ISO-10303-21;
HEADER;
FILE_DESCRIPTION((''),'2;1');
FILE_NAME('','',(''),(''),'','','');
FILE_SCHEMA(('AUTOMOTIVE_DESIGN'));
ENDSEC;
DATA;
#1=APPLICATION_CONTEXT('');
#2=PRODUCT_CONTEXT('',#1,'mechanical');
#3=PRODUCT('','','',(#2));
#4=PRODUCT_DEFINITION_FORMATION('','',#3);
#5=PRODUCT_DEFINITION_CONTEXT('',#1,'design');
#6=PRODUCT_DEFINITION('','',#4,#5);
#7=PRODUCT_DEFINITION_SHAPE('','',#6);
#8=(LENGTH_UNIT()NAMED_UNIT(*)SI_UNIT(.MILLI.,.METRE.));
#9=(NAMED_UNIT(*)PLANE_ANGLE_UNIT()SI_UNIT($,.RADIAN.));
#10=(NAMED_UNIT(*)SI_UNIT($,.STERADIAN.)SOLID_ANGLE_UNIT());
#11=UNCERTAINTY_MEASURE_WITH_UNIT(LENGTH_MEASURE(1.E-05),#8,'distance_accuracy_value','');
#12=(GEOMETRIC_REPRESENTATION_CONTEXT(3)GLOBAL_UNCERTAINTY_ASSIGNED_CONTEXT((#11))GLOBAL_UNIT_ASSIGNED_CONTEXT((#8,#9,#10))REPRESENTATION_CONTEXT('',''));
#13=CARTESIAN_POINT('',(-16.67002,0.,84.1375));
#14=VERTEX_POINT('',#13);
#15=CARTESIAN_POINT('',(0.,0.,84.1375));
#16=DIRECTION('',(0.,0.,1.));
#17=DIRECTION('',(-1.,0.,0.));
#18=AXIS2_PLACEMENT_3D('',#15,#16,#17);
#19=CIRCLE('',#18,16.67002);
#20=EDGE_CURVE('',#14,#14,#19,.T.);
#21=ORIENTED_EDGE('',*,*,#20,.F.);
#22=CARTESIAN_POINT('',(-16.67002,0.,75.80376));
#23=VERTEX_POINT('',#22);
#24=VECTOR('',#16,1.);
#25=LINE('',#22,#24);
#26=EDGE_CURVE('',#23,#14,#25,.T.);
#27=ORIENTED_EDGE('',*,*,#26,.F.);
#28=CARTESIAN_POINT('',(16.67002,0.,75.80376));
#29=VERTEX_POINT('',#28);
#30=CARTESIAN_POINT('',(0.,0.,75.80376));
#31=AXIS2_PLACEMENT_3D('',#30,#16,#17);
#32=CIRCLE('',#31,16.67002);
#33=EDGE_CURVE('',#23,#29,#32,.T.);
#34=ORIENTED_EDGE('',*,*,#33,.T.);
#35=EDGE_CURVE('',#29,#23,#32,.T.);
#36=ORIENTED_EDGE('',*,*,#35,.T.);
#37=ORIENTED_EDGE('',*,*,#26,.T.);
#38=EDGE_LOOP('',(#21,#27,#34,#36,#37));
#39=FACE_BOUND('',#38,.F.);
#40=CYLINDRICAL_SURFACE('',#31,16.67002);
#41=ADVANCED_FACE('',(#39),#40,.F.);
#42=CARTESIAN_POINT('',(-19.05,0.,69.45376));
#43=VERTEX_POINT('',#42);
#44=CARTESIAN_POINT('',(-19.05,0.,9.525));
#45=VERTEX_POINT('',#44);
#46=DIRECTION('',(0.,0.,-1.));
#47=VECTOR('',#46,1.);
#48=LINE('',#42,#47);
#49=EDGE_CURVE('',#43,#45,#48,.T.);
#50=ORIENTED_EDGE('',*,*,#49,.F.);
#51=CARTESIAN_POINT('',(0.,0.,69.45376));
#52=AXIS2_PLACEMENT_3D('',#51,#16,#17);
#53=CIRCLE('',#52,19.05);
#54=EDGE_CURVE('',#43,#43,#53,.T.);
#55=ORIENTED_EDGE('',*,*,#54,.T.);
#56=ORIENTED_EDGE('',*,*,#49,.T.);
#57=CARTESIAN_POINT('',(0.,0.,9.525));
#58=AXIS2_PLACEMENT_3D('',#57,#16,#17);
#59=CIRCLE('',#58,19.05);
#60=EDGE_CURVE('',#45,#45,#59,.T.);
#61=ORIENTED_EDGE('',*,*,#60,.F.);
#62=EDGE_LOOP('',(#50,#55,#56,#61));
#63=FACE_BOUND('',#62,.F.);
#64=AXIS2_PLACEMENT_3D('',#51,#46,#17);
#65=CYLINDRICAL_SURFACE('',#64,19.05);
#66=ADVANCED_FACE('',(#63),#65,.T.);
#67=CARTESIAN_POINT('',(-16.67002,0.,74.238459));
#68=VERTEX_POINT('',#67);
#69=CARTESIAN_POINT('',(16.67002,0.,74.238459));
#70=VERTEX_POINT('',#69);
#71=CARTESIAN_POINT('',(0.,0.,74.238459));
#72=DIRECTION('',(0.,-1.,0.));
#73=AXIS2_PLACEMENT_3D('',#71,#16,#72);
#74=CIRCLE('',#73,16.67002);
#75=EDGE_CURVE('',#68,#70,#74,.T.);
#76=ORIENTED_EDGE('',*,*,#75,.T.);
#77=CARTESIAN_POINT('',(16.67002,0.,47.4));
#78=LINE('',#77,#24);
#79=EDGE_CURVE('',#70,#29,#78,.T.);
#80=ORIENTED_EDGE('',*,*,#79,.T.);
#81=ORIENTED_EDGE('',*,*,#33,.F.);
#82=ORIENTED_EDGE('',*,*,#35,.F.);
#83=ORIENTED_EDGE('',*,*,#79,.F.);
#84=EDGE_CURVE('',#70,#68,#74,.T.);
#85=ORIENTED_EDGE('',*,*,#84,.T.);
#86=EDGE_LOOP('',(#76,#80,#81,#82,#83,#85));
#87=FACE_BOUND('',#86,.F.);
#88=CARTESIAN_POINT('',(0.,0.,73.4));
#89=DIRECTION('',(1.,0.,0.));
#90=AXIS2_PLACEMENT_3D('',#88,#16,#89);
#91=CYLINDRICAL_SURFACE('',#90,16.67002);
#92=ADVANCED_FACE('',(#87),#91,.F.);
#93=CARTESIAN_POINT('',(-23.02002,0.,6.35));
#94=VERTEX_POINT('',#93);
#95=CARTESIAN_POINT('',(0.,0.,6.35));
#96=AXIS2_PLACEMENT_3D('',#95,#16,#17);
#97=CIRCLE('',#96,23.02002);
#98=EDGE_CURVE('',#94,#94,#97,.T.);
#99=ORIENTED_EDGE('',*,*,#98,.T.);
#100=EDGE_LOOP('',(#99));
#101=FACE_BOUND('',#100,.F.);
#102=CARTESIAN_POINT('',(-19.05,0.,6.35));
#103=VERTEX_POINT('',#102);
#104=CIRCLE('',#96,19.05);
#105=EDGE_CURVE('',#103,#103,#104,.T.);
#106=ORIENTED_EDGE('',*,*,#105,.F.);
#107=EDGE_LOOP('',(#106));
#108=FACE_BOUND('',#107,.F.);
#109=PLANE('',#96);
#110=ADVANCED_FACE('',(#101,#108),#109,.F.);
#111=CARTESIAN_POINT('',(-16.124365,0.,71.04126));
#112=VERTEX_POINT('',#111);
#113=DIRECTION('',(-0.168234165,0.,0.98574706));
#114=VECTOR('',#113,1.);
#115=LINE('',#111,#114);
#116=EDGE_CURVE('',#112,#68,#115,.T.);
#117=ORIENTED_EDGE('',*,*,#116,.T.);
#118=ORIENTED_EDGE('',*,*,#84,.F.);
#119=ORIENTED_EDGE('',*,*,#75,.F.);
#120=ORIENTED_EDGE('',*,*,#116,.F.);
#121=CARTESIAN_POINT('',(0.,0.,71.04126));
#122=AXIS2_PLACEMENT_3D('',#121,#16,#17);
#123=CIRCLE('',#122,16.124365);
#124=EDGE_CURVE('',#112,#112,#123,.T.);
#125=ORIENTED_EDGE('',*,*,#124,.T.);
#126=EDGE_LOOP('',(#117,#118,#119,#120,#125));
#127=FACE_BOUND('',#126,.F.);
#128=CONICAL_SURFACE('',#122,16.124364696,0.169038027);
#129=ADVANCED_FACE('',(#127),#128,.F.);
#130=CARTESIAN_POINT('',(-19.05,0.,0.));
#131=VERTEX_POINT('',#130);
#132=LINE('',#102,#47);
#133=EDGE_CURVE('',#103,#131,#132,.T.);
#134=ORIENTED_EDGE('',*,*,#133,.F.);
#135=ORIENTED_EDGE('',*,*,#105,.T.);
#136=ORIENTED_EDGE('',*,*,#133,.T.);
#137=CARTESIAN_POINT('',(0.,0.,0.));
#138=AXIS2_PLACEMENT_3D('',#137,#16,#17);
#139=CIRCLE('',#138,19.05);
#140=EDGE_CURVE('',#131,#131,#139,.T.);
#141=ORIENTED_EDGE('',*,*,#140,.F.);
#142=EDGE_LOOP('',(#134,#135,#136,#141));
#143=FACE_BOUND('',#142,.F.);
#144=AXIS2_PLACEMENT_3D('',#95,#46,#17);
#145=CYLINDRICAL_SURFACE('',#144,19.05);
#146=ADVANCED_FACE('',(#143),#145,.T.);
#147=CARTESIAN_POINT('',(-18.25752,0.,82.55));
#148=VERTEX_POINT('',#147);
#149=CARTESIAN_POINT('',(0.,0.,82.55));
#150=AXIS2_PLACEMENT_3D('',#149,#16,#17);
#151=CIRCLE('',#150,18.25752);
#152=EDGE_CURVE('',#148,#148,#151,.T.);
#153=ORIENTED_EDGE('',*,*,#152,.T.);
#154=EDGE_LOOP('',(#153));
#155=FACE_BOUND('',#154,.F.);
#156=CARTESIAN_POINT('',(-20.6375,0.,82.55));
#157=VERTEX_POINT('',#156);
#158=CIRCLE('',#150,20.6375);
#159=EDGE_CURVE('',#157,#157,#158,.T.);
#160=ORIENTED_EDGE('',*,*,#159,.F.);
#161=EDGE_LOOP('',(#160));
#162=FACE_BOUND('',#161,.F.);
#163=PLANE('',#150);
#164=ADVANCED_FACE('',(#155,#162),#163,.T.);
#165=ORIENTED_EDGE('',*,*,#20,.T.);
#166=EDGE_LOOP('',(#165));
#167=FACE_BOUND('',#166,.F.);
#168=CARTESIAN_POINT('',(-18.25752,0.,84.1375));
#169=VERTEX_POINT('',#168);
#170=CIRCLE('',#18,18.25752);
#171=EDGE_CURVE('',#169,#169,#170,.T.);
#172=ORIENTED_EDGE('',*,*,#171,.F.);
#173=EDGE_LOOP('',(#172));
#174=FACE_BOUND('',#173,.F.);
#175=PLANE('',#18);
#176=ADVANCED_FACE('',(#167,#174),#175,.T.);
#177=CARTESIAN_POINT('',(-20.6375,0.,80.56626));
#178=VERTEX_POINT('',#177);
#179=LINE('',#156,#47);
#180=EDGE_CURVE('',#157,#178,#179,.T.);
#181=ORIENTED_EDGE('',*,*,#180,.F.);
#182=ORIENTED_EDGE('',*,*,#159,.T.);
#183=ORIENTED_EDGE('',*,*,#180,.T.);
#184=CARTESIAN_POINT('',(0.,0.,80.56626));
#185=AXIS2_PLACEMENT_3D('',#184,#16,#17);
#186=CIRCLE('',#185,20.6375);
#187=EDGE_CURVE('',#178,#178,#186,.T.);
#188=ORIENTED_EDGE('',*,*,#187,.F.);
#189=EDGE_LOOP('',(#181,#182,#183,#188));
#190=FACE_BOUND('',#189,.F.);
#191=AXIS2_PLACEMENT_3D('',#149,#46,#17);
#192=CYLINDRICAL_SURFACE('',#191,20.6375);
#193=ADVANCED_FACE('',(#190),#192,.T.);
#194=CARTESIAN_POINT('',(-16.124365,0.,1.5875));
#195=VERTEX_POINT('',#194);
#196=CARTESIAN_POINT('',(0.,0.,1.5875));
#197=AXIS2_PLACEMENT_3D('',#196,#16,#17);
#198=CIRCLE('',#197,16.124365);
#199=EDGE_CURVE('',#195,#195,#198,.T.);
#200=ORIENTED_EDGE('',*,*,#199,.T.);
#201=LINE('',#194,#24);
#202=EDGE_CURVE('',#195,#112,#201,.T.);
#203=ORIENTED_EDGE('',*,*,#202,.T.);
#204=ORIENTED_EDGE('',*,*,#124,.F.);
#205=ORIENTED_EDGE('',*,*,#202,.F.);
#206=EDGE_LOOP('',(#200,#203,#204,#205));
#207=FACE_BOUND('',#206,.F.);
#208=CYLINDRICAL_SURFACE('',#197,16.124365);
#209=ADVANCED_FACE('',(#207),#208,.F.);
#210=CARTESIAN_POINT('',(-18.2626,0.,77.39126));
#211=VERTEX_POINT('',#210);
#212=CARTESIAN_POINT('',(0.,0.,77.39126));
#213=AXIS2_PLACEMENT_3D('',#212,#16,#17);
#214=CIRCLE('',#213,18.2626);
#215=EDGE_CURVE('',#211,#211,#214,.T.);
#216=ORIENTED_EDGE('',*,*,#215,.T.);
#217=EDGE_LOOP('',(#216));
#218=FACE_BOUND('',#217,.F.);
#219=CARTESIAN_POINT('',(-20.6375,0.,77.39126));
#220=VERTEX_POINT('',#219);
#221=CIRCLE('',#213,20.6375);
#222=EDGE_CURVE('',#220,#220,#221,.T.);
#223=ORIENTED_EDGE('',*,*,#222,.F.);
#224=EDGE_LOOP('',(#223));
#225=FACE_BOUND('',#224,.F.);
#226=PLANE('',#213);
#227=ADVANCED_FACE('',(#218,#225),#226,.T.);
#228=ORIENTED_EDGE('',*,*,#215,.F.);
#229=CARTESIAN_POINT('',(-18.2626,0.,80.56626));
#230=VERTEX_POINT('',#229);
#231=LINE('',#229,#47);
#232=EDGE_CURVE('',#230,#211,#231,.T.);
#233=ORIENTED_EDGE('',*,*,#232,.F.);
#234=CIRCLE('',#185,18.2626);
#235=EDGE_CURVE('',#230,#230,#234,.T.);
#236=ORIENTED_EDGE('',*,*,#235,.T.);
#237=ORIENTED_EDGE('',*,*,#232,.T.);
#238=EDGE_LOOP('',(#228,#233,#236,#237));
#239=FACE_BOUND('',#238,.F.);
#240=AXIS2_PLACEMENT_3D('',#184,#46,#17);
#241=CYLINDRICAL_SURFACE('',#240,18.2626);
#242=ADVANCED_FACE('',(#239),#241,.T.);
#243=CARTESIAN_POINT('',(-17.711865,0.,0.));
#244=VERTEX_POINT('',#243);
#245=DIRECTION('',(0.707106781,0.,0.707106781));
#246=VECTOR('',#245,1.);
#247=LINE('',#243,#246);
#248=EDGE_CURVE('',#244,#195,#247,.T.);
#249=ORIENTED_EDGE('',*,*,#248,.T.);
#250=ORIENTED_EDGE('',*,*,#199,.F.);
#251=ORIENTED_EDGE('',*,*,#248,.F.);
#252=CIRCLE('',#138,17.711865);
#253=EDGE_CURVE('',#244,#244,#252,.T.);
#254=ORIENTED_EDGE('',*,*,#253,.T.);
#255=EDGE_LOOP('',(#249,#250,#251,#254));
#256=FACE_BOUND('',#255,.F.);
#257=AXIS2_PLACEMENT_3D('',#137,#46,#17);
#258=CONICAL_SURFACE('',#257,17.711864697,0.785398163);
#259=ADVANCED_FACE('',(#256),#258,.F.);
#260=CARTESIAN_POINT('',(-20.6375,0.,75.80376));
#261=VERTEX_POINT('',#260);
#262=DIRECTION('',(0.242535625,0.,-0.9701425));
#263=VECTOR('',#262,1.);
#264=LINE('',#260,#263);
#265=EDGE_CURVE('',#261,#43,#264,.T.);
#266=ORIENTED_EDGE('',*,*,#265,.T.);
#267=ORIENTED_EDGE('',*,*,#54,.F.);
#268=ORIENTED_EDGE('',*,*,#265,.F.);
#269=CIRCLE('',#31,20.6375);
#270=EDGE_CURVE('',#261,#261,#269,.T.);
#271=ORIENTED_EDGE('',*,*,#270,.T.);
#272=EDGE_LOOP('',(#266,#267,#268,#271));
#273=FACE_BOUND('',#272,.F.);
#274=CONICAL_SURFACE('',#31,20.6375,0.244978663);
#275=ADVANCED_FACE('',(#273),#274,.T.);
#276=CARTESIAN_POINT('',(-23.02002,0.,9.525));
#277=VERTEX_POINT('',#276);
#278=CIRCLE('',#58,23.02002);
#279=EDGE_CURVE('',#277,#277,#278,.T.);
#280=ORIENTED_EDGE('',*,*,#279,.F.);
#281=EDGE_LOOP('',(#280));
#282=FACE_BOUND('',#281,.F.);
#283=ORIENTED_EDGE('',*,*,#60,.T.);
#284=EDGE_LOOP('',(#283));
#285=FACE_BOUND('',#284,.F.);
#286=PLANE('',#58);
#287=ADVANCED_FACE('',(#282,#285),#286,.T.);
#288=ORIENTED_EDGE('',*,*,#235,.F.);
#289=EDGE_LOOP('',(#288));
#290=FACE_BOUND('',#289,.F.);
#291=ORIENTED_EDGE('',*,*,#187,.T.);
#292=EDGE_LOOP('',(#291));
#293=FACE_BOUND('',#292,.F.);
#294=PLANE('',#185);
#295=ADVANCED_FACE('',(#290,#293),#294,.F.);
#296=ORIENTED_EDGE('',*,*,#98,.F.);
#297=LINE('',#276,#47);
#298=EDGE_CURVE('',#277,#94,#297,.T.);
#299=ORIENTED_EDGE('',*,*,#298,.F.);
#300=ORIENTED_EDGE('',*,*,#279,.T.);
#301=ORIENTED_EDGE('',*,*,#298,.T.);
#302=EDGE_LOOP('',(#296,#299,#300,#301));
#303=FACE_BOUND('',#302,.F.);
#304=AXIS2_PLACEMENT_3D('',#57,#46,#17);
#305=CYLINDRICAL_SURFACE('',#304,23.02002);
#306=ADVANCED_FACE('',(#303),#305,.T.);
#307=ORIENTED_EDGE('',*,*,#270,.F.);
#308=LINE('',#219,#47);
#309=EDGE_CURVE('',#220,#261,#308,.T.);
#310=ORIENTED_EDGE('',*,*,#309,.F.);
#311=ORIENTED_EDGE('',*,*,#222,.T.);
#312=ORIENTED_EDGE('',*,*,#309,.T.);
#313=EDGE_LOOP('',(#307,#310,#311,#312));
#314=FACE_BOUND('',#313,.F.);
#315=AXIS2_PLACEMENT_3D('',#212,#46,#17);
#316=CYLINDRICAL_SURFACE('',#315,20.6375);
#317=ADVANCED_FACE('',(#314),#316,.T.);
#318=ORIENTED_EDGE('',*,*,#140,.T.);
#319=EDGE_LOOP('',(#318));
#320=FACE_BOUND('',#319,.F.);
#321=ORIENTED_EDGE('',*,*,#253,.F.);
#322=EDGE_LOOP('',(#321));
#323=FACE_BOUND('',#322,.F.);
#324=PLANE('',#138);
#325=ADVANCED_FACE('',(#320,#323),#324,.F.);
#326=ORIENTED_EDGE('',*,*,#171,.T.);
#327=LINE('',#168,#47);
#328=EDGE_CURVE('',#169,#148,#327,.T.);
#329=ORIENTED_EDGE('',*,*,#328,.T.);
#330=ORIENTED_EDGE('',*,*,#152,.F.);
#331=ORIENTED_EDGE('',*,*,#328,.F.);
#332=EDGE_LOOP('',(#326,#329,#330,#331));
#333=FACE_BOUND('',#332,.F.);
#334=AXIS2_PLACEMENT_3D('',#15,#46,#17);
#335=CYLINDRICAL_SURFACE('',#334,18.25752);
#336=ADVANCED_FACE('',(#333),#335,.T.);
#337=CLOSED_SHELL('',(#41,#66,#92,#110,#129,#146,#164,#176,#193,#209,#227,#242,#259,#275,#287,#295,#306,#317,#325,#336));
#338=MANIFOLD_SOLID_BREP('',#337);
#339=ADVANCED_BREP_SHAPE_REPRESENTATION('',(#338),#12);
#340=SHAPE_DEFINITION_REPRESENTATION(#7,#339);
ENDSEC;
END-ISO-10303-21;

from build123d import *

# Parameters (mm, degrees)
F2_S5_R     = 16.67002
F2_T6_DEPTH = 26


# Not quite as in the source:
# - a fillet or chamfer that OpenCascade refuses, or shapes differently, is made with other operations: its cross-section is extruded or revolved along the edge and cut away or added


with BuildPart() as f1:
    # F0 (on Front) → F1 (revolve)
    with BuildSketch(Plane.XZ):
        Polygon((-17.7118646965, 0), (-16.1243646965, 1.5875), (-16.1243646965, 75.80376), (-16.67002, 75.80376), (-16.67002, 84.1375), (-18.25752, 84.1375), (-18.25752, 82.55), (-20.6375, 82.55), (-20.6375, 80.56626), (-18.2626, 80.56626), (-18.2626, 77.39126), (-20.6375, 77.39126), (-20.6375, 75.80376), (-19.05, 69.45376), (-19.05, 9.525), (-23.02002, 9.525), (-23.02002, 6.35), (-19.05, 6.35), (-19.05, 0), align=None)
    revolve(axis=Axis((0, 0, 38.1), (0, 0, 1)))

    # F2: chamfer of 0.8128 x 4.7625 on 1 edges, made by hand


with BuildPart() as f2_tool2:
    # F2_s3 → F2_t4 (revolve)
    with BuildSketch(Plane.XZ):
        Polygon((-16.1243646965, 71.04126), (-16.9371646965, 75.80376), (-16.1243646965, 75.80376), align=None)
    revolve(axis=Axis((0, 0, 75.80376), (0, 0, 1)))

    # F2_s5 → F2_t6 (intersect, symmetric)
    with BuildSketch(Plane.XY.offset(73.4)):
        Circle(F2_S5_R)
    extrude(amount=F2_T6_DEPTH, both=True, mode=Mode.INTERSECT)


with BuildPart() as f1_1:
    add(f1.part)

    # F2_t1: cut F2_tool2
    add(f2_tool2.part, mode=Mode.SUBTRACT)


solid = f1_1.part
